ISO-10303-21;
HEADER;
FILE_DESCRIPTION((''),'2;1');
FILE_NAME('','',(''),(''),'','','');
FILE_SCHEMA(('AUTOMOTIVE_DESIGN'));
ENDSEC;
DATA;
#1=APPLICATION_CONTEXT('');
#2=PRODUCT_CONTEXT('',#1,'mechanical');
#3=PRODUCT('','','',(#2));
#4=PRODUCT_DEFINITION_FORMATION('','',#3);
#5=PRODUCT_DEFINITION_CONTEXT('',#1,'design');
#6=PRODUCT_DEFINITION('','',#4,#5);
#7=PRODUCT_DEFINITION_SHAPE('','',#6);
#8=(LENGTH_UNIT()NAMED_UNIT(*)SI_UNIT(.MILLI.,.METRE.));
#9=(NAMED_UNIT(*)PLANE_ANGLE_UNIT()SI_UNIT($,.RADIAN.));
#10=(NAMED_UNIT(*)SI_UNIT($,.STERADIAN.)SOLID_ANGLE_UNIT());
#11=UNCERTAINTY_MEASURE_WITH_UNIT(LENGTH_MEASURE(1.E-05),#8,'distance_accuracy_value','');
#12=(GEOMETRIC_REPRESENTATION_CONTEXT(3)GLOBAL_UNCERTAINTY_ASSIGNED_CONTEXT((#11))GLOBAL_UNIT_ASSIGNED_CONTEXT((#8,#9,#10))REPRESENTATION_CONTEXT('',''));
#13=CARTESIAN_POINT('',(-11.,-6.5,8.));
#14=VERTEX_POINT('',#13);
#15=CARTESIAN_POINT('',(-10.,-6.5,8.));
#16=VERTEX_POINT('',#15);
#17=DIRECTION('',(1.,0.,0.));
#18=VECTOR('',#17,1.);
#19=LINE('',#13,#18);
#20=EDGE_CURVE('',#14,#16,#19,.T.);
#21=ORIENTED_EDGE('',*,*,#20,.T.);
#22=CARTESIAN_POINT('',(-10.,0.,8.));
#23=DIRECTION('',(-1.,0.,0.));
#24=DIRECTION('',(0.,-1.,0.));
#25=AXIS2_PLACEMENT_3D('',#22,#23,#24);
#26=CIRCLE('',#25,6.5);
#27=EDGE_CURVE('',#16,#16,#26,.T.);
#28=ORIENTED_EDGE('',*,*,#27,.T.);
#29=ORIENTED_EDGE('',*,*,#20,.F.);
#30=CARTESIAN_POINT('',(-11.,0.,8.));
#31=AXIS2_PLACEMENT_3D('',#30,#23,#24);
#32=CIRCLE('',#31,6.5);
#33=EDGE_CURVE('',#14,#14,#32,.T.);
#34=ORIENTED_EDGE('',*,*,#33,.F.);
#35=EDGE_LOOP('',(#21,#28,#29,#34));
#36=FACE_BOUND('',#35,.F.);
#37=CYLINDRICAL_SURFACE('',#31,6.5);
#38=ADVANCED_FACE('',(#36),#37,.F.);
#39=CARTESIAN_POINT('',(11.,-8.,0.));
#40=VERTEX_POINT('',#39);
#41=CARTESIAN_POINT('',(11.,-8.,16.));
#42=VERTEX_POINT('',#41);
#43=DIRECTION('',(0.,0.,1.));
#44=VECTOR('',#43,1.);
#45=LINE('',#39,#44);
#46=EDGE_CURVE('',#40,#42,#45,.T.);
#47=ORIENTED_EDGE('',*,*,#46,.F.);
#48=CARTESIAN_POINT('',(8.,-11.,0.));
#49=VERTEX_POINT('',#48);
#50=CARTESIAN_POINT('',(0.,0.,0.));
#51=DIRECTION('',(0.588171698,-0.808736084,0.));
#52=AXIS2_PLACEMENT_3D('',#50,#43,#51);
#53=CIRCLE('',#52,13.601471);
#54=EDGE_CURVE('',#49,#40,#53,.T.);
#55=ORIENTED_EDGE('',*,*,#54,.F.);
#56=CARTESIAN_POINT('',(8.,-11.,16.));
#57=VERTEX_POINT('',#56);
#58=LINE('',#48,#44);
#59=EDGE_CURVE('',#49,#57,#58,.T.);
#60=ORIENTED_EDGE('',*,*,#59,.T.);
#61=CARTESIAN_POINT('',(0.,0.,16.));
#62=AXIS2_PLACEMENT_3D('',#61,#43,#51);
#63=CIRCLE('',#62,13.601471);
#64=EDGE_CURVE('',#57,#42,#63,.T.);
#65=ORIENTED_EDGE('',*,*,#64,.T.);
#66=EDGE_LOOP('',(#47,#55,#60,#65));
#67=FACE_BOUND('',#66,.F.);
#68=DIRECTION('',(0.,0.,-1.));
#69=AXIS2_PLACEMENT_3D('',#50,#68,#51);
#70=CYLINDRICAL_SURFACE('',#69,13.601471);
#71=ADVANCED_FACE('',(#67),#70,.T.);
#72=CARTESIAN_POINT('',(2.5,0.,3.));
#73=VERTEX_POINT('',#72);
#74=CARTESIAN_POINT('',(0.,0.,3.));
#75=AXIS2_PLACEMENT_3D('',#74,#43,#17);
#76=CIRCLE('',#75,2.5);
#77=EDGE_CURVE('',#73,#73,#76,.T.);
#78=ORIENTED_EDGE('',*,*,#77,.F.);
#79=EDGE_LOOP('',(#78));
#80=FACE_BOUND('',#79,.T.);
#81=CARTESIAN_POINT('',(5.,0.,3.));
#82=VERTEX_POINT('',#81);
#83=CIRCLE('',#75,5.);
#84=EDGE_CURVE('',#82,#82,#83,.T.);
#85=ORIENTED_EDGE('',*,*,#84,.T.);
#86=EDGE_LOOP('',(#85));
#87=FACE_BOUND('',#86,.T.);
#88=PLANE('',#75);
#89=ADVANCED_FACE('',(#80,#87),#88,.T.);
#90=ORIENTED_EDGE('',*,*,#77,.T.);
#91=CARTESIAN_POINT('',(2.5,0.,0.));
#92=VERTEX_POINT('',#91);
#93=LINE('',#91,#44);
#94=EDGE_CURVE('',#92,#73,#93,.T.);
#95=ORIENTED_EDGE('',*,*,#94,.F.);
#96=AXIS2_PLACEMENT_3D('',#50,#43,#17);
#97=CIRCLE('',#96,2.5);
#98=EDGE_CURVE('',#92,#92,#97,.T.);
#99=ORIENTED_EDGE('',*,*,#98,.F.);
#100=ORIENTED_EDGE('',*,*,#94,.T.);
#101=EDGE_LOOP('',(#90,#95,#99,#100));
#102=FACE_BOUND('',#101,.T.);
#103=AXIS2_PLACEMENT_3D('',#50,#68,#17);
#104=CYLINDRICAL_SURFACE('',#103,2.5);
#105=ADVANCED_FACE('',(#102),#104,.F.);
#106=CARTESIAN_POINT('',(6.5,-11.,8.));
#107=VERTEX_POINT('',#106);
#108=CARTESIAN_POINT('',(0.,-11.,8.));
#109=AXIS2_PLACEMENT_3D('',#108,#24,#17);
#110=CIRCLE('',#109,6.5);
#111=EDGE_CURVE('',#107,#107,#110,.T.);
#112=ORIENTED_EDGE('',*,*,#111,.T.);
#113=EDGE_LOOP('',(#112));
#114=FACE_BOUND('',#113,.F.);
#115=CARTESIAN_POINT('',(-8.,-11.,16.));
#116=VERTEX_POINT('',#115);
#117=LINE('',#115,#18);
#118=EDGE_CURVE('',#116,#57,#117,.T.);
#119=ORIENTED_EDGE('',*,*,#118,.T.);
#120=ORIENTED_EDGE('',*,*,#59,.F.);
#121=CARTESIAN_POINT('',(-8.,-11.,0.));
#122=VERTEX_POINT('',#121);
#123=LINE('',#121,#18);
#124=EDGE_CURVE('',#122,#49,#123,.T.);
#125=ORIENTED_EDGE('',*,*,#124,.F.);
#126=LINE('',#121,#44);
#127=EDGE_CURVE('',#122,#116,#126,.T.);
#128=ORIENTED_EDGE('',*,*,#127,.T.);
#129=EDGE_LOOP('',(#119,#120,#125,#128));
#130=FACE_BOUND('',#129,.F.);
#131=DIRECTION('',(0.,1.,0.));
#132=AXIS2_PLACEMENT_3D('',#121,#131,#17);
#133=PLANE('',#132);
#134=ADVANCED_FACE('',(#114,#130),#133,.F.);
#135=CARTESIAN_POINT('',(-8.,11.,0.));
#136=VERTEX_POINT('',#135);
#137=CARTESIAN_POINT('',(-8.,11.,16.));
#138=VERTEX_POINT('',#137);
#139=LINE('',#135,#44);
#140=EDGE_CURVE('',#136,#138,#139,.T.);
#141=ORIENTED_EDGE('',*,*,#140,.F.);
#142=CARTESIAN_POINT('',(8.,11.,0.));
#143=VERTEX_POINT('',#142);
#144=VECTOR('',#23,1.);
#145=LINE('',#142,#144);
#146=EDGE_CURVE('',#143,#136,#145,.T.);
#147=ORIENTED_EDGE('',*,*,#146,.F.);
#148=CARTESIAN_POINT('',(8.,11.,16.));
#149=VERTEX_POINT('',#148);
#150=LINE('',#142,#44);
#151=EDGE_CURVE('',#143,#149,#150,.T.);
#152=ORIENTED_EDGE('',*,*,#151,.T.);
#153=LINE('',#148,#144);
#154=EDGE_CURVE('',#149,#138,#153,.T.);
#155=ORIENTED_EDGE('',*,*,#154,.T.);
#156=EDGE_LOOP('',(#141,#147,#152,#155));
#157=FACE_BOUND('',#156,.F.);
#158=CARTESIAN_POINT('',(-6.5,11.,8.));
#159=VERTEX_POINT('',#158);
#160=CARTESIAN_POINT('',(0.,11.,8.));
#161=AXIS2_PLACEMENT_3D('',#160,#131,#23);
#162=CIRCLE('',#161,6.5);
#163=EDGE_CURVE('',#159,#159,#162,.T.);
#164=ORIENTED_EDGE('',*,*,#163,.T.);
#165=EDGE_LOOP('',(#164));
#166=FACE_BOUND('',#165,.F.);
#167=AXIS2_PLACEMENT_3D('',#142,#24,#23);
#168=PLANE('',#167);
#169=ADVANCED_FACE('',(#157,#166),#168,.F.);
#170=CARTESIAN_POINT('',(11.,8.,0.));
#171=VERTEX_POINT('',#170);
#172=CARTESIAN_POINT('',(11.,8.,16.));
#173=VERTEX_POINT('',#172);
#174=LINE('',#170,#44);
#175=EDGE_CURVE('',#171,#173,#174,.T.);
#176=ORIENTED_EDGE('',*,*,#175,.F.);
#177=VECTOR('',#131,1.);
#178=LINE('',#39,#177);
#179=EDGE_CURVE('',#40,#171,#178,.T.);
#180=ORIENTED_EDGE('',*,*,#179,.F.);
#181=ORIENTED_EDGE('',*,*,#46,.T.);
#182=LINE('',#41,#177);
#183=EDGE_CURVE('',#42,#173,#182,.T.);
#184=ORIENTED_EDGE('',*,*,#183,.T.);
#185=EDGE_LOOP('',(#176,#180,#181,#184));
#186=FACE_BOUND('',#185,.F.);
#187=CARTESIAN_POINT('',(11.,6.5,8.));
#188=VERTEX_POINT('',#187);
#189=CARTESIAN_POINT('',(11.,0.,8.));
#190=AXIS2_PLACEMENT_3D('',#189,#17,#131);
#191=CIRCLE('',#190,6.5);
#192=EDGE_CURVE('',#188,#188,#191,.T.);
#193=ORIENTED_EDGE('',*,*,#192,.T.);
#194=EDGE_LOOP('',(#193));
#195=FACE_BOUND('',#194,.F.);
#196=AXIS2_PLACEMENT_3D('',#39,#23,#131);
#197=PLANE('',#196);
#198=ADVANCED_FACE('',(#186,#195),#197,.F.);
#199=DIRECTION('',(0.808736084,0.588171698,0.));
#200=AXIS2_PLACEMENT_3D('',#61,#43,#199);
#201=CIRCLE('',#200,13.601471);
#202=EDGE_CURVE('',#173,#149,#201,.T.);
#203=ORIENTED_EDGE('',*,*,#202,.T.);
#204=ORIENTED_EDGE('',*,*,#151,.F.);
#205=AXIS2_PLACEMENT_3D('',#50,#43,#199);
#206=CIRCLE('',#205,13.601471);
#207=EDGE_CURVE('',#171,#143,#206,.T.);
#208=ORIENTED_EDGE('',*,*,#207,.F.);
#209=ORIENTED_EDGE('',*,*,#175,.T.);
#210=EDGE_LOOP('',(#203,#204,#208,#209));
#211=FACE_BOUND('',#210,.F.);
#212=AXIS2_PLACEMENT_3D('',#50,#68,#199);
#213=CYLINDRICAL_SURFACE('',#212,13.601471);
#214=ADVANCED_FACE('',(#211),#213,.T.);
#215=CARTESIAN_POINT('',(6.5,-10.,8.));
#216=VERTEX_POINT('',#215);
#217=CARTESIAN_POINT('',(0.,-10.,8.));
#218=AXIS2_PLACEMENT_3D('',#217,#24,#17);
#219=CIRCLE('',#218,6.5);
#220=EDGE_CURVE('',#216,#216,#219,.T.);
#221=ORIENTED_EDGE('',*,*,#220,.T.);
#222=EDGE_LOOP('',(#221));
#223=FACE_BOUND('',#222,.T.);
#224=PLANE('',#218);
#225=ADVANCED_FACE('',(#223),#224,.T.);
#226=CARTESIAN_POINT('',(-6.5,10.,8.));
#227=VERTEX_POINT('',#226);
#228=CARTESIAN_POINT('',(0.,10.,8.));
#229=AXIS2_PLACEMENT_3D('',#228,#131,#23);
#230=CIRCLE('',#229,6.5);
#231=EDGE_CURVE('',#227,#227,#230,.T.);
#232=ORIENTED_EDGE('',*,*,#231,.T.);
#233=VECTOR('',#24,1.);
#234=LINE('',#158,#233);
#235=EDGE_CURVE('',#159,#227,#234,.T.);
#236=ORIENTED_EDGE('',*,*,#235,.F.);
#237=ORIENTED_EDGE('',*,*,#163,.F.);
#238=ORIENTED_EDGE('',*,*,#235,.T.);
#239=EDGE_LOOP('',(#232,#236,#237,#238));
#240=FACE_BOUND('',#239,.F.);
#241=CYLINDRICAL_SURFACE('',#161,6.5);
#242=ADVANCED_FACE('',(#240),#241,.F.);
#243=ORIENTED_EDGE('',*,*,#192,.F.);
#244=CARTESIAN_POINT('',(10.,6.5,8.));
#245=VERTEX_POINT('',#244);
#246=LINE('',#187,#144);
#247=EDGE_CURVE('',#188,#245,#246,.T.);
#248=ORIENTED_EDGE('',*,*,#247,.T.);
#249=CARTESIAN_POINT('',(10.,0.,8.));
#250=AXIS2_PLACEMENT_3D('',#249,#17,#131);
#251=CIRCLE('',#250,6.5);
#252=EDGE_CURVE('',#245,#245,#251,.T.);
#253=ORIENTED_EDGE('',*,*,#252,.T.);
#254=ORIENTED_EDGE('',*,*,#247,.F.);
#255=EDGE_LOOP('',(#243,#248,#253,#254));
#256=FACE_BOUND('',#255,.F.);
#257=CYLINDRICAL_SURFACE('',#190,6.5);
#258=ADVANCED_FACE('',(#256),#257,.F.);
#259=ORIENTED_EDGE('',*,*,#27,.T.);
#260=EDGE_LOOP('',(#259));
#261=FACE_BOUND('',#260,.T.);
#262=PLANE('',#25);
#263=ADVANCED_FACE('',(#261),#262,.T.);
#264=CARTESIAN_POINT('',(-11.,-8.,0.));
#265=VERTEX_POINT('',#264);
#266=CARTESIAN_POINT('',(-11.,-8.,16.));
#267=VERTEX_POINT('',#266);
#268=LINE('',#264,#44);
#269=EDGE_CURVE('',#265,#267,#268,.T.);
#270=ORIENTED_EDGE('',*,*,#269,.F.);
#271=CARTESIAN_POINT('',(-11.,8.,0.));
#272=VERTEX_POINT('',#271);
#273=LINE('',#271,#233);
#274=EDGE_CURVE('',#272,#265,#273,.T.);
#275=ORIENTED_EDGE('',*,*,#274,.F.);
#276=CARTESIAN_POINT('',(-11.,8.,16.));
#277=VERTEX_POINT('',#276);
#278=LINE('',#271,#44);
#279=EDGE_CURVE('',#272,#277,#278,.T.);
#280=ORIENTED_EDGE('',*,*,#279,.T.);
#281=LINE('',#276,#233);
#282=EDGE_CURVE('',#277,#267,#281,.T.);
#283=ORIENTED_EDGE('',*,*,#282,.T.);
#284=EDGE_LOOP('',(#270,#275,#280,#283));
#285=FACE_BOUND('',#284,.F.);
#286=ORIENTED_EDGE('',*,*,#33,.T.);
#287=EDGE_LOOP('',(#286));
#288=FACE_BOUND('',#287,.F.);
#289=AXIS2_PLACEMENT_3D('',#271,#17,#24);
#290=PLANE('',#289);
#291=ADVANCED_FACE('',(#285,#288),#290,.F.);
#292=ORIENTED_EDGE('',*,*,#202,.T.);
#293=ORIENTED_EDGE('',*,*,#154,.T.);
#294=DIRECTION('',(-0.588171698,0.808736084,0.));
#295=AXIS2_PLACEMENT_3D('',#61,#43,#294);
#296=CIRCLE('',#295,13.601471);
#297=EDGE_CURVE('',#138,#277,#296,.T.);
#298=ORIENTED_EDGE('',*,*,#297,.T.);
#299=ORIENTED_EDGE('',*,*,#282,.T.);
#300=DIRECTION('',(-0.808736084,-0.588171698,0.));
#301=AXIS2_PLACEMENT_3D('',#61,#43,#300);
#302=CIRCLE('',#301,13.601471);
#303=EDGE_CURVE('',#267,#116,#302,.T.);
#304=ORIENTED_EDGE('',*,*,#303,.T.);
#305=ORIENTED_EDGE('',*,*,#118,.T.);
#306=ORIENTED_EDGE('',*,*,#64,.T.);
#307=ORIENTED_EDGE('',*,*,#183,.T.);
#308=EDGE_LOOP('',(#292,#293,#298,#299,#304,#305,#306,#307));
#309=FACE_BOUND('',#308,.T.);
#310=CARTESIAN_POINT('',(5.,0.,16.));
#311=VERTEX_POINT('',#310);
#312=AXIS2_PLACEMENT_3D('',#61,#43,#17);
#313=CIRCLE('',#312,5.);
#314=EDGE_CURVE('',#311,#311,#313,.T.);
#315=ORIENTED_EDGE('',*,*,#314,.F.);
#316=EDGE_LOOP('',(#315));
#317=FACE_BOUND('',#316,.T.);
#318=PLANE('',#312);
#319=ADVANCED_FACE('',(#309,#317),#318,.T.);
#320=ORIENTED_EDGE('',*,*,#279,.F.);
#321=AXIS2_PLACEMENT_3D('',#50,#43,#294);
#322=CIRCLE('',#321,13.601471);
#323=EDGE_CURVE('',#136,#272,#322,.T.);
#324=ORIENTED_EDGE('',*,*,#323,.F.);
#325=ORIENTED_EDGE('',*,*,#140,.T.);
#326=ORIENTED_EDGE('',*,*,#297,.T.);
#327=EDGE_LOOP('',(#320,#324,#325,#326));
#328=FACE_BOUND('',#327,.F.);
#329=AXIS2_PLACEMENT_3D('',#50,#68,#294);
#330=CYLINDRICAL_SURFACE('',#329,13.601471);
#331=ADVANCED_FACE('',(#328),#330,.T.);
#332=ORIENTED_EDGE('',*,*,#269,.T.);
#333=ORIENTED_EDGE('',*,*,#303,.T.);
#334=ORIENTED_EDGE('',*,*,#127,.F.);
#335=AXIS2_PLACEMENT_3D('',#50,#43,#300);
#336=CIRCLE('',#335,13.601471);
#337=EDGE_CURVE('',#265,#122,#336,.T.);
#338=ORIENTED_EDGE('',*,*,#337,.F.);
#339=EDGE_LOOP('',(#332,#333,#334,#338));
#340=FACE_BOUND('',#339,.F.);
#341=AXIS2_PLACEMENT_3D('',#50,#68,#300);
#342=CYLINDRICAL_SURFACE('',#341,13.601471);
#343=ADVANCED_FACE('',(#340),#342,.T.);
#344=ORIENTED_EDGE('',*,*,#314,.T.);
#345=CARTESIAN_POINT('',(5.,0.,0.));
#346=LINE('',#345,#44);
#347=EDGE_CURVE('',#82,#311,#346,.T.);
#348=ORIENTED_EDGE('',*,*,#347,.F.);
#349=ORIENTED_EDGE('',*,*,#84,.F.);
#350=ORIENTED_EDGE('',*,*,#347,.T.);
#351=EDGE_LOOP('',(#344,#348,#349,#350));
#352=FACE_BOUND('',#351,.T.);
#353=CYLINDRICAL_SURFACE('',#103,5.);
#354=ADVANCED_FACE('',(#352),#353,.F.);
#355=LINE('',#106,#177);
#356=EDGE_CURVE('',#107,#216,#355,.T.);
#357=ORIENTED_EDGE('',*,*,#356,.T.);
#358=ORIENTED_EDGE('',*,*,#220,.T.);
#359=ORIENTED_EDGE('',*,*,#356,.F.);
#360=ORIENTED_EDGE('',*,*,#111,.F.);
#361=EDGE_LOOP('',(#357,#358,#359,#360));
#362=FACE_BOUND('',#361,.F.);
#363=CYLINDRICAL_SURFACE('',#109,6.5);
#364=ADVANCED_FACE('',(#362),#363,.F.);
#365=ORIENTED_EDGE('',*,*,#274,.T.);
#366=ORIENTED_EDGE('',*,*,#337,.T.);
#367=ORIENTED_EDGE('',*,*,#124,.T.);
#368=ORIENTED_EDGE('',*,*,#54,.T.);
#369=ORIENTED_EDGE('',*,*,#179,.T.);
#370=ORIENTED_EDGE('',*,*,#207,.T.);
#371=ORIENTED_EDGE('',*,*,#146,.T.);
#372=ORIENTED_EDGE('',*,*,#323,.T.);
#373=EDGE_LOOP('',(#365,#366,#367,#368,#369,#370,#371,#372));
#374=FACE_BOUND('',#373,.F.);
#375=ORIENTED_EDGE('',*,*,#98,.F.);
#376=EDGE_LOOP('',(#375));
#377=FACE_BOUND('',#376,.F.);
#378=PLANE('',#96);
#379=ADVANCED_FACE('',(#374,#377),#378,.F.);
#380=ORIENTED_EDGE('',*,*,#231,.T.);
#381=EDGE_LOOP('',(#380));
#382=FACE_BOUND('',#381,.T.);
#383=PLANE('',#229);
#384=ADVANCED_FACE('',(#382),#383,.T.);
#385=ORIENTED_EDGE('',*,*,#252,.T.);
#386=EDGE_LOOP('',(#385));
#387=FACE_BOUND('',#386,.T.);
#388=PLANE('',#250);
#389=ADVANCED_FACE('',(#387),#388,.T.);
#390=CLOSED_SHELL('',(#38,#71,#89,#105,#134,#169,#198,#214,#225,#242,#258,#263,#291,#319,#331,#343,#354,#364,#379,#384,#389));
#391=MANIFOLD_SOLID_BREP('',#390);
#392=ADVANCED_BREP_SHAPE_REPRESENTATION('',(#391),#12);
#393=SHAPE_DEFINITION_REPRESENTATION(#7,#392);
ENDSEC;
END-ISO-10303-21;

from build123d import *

# Parameters (mm, degrees)
F0_R            = 5
F2_DEPTH        = 16
F3_R            = 6.5
F4_DEPTH        = 1
F4_COPIES_COUNT = 4
F0_R_2          = 2.5
F5_DEPTH        = 3


# Not quite as in the source:
# - a pattern or mirror of a feature is missing from the dataset's text; its kind, count and spacing are read off the source's solid


with BuildPart() as f2:
    # F0 (on Top) → F2 (new body)
    with BuildSketch(Plane.XY):
        with BuildLine():
            Line((11, -8), (11, 8))
            ThreePointArc((11, 8), (9.6176920308, 9.6176920308), (8, 11))
            Line((8, 11), (-8, 11))
            ThreePointArc((-8, 11), (-9.6176920308, 9.6176920308), (-11, 8))
            Line((-11, 8), (-11, -8))
            ThreePointArc((-11, -8), (-9.6176920308, -9.6176920308), (-8, -11))
            Line((-8, -11), (8, -11))
            ThreePointArc((8, -11), (9.6176920308, -9.6176920308), (11, -8))
        make_face()
        Circle(F0_R, mode=Mode.SUBTRACT)
    extrude(amount=F2_DEPTH)

    # F3 (on face) → F4 (cut)
    with BuildSketch(Plane.XZ.offset(11)):
        with Locations((0, 8)):
            Circle(F3_R)
    f4 = extrude(amount=-F4_DEPTH, mode=Mode.SUBTRACT)

    # F4_copies: F4 ×4 about axis
    f4_copies_axis = Axis((0, 0, 0), (0, 0, 1))
    for i in range(1, F4_COPIES_COUNT):
        add(f4.rotate(f4_copies_axis, i * 360 / F4_COPIES_COUNT), mode=Mode.SUBTRACT)

    # F0 (on Top) → F5 (join)
    with BuildSketch(Plane.XY):
        Circle(F0_R)
        Circle(F0_R_2, mode=Mode.SUBTRACT)
    extrude(amount=F5_DEPTH)


solid = f2.part
